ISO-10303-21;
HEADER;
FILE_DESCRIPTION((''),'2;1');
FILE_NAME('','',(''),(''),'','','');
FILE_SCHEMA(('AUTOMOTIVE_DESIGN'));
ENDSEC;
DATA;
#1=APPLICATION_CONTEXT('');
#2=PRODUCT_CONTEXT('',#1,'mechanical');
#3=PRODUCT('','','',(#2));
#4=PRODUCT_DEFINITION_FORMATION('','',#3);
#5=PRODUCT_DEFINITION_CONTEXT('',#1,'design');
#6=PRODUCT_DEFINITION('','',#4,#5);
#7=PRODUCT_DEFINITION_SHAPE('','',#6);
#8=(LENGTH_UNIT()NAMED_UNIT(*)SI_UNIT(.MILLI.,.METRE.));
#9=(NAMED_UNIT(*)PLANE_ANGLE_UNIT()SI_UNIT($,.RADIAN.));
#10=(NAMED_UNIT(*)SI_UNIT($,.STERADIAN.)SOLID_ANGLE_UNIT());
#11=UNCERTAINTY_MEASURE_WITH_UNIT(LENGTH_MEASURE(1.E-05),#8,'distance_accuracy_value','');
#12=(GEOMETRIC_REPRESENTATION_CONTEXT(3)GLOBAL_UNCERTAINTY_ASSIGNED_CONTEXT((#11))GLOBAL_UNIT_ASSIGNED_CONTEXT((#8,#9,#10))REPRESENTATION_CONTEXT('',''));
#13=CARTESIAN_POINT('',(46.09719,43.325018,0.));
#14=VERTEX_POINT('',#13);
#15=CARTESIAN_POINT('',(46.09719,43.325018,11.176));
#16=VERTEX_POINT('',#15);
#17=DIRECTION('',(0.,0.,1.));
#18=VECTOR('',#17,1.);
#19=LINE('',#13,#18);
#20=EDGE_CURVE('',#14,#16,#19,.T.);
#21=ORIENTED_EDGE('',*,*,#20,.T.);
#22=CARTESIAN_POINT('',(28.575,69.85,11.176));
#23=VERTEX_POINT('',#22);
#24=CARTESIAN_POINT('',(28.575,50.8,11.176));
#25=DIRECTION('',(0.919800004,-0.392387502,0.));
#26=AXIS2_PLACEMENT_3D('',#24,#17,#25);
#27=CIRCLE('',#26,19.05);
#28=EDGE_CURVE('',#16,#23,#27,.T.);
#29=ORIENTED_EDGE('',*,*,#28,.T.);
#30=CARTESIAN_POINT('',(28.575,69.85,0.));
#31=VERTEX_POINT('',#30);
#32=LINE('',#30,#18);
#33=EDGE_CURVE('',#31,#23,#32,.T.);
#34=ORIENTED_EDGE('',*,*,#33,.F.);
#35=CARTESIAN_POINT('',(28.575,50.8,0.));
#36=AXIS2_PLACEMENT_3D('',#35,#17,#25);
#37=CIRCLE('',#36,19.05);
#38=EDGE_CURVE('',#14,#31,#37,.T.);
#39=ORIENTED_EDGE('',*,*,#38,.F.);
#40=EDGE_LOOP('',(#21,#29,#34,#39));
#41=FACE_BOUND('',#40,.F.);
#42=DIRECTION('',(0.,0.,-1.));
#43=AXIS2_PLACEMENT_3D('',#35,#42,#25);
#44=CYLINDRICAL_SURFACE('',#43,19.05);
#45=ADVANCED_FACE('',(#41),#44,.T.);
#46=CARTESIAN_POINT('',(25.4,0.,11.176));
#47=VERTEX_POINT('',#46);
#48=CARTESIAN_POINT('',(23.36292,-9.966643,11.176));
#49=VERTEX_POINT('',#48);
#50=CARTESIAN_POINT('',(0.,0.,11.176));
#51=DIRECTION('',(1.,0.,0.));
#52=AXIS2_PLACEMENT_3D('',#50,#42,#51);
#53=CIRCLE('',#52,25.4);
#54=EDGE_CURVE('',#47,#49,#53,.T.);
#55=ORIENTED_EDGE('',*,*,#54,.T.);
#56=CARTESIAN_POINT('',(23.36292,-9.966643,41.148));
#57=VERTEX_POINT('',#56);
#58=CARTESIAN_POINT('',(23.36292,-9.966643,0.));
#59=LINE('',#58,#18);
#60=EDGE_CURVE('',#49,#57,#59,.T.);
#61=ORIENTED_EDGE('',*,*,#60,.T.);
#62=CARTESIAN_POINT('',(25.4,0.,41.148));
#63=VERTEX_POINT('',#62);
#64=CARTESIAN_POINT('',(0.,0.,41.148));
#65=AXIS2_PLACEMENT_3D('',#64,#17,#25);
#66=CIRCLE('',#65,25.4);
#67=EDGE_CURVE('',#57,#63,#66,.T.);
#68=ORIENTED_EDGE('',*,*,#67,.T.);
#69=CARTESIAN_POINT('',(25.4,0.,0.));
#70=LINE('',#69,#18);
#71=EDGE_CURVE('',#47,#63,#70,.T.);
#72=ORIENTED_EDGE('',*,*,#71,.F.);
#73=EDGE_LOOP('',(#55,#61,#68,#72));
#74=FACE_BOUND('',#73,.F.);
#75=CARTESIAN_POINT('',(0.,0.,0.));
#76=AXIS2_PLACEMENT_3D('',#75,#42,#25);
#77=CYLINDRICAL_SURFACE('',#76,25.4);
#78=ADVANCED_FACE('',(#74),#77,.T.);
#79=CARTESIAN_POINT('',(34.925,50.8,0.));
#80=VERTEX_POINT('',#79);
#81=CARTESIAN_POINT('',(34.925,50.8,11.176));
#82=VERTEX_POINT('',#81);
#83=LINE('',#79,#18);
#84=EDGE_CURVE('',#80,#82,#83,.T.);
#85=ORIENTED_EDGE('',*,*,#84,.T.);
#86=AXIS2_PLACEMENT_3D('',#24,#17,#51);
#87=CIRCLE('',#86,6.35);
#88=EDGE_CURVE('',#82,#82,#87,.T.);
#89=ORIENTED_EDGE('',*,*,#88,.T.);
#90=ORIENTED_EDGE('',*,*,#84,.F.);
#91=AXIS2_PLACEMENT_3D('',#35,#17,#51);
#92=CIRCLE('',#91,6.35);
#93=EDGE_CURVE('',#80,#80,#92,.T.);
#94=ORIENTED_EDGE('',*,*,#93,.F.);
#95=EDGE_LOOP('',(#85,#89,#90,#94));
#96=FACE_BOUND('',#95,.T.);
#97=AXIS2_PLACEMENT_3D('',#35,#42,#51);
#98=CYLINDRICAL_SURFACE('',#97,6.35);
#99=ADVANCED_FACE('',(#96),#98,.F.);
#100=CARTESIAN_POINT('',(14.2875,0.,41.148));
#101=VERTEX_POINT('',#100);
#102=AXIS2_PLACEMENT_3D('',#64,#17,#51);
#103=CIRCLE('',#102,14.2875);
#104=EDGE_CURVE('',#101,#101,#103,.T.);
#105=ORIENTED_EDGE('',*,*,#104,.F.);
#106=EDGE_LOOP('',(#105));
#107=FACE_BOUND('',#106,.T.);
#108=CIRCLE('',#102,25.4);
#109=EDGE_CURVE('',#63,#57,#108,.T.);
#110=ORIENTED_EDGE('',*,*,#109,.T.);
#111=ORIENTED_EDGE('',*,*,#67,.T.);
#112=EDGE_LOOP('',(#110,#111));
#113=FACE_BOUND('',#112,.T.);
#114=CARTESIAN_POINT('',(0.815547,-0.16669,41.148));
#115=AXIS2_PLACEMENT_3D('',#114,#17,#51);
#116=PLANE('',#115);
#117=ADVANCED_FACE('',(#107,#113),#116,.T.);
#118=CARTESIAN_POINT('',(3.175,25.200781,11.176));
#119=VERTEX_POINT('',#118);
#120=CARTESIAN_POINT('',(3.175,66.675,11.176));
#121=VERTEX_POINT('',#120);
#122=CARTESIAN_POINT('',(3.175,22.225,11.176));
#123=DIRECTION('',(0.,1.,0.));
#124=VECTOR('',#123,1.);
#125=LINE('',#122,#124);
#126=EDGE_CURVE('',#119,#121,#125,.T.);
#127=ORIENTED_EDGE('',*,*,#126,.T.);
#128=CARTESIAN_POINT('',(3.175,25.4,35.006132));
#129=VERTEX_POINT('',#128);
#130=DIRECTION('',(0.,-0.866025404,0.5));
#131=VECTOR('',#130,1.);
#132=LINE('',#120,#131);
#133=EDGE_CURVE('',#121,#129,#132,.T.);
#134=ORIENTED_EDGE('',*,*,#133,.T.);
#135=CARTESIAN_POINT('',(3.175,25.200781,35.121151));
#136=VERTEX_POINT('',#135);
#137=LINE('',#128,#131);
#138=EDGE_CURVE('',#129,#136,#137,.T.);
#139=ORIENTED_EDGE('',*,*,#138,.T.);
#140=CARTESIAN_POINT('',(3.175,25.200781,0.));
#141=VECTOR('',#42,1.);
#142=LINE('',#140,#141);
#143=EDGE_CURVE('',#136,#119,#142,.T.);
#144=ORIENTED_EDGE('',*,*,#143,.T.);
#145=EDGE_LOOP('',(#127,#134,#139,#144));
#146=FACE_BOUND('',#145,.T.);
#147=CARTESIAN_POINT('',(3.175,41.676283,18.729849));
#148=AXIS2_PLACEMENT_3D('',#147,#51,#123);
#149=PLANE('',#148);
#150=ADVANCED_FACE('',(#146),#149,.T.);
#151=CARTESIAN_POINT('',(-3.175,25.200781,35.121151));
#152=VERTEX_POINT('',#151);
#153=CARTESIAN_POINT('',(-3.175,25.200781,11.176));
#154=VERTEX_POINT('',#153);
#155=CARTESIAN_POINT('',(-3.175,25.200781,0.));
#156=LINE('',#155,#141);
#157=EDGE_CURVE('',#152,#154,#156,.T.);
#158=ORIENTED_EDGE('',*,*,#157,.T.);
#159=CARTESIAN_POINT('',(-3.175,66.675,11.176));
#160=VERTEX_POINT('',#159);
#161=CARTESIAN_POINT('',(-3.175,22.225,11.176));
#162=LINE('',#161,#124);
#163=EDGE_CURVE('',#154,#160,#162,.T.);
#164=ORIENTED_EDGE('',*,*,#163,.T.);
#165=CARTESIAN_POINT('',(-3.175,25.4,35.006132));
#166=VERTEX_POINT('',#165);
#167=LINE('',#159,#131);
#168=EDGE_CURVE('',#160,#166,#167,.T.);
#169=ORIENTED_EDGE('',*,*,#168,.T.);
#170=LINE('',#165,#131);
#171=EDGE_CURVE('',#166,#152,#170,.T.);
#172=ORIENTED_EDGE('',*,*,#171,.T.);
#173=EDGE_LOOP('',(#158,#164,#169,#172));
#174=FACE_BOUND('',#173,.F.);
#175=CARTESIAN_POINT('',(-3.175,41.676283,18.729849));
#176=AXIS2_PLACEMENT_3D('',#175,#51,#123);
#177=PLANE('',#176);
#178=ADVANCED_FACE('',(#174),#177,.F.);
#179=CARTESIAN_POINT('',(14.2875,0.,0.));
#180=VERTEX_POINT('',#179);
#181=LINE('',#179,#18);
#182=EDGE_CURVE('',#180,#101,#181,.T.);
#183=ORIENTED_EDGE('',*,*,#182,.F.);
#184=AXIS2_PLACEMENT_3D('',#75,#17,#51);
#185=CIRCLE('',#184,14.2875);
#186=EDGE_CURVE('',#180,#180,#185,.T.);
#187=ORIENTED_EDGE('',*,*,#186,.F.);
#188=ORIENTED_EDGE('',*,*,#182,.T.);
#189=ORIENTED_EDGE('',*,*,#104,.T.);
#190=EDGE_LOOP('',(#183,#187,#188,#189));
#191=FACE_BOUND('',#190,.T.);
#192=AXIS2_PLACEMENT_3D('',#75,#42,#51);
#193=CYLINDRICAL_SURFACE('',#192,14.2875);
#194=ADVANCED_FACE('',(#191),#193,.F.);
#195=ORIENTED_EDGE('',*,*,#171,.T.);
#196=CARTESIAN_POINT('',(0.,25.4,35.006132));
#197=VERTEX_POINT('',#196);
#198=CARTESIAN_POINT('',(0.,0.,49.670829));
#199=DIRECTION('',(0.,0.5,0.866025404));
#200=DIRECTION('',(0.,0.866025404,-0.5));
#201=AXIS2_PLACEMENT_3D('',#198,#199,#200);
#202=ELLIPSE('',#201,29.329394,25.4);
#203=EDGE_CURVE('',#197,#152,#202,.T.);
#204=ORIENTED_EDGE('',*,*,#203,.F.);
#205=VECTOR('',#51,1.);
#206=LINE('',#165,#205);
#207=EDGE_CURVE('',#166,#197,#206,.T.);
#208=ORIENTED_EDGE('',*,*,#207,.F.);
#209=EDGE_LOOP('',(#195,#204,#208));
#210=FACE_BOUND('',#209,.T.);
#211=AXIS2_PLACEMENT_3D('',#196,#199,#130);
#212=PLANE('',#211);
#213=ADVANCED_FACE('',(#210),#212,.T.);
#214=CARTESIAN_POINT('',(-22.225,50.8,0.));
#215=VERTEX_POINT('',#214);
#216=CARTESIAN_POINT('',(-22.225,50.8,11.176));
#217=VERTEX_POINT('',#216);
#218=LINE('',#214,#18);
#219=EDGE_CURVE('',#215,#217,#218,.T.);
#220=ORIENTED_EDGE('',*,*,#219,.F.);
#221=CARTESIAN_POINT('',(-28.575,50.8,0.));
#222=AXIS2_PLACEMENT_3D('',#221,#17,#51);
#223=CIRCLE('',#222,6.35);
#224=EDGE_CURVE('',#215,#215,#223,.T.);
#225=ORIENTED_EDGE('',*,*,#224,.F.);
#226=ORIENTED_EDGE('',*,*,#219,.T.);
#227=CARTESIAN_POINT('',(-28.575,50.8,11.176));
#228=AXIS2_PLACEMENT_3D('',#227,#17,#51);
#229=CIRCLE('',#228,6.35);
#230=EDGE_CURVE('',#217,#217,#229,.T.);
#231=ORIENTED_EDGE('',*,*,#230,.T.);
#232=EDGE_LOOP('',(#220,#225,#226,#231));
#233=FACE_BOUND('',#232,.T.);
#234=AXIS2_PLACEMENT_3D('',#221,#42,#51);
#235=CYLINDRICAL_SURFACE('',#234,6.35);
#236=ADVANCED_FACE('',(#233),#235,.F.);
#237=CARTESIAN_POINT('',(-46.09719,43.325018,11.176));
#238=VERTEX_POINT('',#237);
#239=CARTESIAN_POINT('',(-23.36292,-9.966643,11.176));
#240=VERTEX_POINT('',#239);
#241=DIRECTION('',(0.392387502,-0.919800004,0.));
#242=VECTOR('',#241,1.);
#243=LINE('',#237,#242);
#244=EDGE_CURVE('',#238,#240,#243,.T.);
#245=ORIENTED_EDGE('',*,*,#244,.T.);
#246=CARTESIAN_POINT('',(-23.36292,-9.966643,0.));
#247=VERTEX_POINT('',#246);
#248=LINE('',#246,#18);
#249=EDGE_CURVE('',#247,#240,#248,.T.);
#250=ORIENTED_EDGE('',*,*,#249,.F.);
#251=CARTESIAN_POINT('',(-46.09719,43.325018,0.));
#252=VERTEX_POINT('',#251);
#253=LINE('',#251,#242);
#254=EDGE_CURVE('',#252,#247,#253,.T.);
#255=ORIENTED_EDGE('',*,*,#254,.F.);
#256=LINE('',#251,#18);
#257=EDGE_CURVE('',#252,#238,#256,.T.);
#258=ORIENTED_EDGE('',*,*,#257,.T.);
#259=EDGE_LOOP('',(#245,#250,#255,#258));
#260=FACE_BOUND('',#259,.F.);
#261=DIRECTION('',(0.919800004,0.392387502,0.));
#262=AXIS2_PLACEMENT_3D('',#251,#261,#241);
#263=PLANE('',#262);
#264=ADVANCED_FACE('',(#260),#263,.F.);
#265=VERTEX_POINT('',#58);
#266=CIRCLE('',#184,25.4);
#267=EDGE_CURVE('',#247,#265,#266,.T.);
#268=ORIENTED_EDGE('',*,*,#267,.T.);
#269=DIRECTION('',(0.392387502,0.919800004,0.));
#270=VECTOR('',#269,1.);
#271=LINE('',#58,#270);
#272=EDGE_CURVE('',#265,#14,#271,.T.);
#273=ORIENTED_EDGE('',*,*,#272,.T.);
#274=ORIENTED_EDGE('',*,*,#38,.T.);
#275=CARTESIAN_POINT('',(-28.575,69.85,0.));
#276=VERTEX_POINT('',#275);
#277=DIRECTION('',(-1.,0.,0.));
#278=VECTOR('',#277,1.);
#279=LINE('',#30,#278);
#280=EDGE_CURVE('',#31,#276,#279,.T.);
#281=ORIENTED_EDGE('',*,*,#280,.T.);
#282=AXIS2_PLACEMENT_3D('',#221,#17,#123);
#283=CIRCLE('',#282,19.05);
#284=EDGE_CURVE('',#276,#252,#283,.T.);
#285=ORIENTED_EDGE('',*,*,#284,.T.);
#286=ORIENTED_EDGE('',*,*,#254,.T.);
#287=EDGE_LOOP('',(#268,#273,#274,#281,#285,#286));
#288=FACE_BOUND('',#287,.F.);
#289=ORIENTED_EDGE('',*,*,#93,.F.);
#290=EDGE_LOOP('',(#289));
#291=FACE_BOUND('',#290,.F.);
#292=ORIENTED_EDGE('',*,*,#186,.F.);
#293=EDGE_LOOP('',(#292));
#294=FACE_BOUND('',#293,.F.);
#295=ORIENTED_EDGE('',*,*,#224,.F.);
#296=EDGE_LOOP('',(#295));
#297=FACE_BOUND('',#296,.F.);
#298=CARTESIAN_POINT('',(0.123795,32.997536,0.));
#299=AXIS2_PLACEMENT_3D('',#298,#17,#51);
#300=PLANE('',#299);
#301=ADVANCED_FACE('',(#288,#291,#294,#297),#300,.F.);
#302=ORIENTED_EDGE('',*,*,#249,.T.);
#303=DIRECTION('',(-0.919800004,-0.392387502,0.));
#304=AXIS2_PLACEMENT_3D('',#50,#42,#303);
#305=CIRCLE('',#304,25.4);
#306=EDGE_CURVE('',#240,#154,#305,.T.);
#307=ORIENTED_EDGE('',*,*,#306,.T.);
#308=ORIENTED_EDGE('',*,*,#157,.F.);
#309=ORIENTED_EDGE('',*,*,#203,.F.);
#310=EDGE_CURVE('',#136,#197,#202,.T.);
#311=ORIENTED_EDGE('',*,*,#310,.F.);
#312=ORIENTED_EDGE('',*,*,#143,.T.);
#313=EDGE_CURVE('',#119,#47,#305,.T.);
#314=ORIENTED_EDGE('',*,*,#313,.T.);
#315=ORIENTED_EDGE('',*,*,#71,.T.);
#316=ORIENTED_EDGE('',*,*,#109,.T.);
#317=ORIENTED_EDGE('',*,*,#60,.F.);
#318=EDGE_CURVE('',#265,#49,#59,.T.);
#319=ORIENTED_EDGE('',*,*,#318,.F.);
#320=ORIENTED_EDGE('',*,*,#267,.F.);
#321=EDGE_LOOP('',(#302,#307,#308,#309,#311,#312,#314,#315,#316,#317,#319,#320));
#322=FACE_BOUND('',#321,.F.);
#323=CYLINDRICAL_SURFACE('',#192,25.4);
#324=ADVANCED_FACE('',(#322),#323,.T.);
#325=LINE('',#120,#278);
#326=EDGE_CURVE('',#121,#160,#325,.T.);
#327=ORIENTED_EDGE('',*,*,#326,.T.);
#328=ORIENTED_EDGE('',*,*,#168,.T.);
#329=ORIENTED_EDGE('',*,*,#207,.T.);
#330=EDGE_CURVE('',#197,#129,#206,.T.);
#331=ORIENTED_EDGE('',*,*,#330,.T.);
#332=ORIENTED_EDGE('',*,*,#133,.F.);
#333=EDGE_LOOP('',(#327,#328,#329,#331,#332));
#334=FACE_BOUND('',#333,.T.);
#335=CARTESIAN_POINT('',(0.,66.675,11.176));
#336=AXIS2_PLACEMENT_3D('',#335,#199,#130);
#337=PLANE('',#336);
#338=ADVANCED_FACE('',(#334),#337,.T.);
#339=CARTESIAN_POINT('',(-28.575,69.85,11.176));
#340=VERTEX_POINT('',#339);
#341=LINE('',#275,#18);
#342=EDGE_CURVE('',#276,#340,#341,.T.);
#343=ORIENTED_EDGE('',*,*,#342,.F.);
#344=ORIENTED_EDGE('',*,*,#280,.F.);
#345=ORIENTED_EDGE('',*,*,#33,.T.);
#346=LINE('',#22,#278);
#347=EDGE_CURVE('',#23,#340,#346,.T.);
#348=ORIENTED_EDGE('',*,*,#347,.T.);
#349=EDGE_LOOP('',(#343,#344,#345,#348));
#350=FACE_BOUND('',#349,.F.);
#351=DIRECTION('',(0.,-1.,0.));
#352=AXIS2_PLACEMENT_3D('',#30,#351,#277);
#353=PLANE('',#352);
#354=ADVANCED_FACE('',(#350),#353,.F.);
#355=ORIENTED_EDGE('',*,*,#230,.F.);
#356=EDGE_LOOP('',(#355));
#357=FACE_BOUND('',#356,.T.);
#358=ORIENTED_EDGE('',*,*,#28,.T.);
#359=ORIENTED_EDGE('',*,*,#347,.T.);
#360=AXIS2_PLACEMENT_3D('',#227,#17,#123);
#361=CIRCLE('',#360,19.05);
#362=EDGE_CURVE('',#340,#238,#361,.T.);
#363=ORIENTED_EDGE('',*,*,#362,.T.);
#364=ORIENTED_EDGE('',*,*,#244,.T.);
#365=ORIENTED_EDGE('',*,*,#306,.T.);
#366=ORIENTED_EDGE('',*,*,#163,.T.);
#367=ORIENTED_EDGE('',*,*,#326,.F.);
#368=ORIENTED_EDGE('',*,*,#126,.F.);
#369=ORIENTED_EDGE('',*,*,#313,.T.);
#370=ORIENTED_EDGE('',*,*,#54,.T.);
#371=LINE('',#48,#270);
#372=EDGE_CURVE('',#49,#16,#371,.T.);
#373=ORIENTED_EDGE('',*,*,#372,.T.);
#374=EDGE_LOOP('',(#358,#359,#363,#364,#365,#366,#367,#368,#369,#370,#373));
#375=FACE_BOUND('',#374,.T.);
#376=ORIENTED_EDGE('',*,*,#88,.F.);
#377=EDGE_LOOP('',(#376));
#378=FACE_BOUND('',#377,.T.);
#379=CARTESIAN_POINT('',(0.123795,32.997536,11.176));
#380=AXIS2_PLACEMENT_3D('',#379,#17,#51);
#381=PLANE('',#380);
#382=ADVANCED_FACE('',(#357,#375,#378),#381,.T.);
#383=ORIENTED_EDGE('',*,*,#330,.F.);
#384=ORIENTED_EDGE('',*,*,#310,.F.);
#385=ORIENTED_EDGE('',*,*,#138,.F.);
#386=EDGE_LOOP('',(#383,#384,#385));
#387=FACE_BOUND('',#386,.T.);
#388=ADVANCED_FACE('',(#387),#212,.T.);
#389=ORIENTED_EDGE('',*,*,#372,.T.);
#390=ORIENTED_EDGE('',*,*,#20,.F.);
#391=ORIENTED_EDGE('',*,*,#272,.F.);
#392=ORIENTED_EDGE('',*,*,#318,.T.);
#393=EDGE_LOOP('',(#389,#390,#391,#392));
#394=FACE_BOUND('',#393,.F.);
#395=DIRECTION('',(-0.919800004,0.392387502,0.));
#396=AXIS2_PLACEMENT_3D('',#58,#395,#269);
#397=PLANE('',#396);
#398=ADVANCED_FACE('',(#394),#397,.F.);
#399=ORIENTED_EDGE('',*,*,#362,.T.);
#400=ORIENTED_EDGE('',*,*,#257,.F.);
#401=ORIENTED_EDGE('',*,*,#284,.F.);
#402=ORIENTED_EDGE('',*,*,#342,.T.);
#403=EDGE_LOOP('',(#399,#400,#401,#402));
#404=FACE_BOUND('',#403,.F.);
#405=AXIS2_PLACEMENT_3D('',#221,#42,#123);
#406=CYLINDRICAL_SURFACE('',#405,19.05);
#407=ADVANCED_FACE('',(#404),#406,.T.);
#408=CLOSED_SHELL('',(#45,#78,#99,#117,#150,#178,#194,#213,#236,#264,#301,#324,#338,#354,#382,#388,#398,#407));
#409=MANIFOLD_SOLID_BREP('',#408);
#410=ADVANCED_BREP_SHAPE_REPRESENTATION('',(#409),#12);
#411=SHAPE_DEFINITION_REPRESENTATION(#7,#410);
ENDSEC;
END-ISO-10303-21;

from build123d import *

# Parameters (mm, degrees)
F0_R     = 14.2875
F1_DEPTH = 41.148
F0_R_2   = 6.35
F2_DEPTH = 11.176
F4_DEPTH = 3.175


# Not quite as in the source:
# - a feature of the source that left no trace in its solid (it failed there, or was rolled back) is left out


with BuildPart() as f1:
    # F0 (on Top) → F1 (new body)
    with BuildSketch(Plane.XY):
        with BuildLine():
            ThreePointArc((23.3629201096, -9.9666425617), (24.8855195926, -5.0863458994), (25.4, 0))
            ThreePointArc((25.4, 0), (-5.0863458994, 24.8855195926), (-23.3629201096, -9.9666425617))
            ThreePointArc((-23.3629201096, -9.9666425617), (0, -25.4), (23.3629201096, -9.9666425617))
        make_face()
        Circle(F0_R, mode=Mode.SUBTRACT)
    extrude(amount=F1_DEPTH)

    # F0 (on Top) → F2 (join)
    with BuildSketch(Plane.XY):
        with BuildLine():
            ThreePointArc((-23.3629201096, -9.9666425617), (-5.0863458994, 24.8855195926), (25.4, 0))
            ThreePointArc((25.4, 0), (24.8855195926, -5.0863458994), (23.3629201096, -9.9666425617))
            Line((23.3629201096, -9.9666425617), (46.0971900822, 43.3250180788))
            ThreePointArc((46.0971900822, 43.3250180788), (44.4699820006, 61.3000974853), (28.575, 69.85))
            Line((28.575, 69.85), (-28.575, 69.85))
            ThreePointArc((-28.575, 69.85), (-44.4699820006, 61.3000974853), (-46.0971900822, 43.3250180788))
            Line((-46.0971900822, 43.3250180788), (-23.3629201096, -9.9666425617))
        make_face()
        with Locations((-28.575, 50.8)):
            Circle(F0_R_2, mode=Mode.SUBTRACT)
        with Locations((28.575, 50.8)):
            Circle(F0_R_2, mode=Mode.SUBTRACT)
    extrude(amount=F2_DEPTH)

    # F3 (on Right) → F4 (join, symmetric)
    with BuildSketch(Plane.YZ):
        Polygon((66.675, 11.176), (25.4, 35.0061323608), (25.4, 11.176), align=None)
        Polygon((25.4, 11.176), (25.4, 35.0061323608), (22.225, 36.8392194655), (22.225, 11.176), align=None)
    extrude(amount=F4_DEPTH, both=True)


solid = f1.part
